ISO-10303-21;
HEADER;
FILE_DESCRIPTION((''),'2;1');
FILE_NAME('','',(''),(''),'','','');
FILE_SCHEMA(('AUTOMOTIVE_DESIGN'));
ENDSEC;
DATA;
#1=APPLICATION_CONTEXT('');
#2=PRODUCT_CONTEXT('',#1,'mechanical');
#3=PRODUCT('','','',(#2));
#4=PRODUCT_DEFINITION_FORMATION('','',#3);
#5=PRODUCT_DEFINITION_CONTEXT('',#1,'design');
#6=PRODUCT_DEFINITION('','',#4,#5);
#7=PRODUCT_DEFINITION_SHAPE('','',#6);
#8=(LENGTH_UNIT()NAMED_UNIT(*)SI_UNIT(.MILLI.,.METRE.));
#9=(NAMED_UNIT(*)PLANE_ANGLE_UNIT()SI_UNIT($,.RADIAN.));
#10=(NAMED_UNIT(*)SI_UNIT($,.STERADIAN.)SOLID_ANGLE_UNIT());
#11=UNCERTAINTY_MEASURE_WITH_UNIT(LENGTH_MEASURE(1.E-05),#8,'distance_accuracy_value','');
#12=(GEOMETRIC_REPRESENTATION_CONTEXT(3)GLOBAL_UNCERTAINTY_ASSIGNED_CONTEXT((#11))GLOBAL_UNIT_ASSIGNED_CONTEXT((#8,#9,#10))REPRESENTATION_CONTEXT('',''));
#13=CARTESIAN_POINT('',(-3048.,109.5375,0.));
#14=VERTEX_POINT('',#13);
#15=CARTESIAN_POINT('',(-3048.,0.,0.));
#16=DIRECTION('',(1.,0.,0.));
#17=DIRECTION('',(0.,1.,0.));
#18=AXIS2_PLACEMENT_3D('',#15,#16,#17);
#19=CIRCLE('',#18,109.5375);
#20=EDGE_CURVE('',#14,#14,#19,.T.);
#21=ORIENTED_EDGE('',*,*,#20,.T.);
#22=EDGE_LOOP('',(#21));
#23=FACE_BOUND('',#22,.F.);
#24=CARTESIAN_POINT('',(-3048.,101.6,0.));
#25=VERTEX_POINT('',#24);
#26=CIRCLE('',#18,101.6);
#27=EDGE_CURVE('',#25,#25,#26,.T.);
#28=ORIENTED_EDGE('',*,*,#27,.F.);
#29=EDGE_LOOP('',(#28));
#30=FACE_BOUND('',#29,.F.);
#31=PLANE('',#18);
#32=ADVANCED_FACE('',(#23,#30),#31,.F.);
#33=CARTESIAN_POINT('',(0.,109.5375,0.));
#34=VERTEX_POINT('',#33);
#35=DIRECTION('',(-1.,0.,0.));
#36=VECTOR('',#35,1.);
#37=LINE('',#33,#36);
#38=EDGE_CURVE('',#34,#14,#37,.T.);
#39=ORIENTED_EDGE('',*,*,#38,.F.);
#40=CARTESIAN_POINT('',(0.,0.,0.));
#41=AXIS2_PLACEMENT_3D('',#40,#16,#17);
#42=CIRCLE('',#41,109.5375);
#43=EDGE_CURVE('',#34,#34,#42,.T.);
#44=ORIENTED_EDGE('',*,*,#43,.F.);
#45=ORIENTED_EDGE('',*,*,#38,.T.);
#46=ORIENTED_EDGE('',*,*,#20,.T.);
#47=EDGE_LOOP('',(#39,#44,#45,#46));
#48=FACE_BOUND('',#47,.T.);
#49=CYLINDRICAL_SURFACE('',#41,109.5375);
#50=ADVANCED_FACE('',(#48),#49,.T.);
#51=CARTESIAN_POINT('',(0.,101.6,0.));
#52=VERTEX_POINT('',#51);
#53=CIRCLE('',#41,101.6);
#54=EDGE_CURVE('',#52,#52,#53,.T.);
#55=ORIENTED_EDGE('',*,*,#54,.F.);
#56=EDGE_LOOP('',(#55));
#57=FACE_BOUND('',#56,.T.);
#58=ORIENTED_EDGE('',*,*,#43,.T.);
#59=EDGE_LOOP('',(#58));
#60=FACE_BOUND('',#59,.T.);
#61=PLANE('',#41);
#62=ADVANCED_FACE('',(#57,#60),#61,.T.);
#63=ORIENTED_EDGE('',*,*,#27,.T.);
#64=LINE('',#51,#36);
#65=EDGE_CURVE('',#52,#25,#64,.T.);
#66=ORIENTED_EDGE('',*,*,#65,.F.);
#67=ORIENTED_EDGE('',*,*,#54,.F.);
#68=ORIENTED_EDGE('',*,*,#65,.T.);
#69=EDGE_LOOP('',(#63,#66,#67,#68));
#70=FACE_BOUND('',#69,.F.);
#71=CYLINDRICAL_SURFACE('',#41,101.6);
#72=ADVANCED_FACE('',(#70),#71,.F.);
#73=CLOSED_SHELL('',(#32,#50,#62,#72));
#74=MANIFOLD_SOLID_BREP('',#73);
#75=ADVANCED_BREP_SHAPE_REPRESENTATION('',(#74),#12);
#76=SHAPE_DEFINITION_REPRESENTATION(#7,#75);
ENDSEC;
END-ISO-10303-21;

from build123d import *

# Parameters (mm, degrees)
F1_R     = 109.5375
F1_R_2   = 101.6
F2_DEPTH = 3048


# Not quite as in the source:
# - a variable given as a bare number and used for a length is read in inches; the dataset says mm whatever the document's units were


with BuildPart() as f2:
    # F1 (on Right) → F2 (new body)
    with BuildSketch(Plane.YZ):
        Circle(F1_R)
        Circle(F1_R_2, mode=Mode.SUBTRACT)
    extrude(amount=-F2_DEPTH)


solid = f2.part
